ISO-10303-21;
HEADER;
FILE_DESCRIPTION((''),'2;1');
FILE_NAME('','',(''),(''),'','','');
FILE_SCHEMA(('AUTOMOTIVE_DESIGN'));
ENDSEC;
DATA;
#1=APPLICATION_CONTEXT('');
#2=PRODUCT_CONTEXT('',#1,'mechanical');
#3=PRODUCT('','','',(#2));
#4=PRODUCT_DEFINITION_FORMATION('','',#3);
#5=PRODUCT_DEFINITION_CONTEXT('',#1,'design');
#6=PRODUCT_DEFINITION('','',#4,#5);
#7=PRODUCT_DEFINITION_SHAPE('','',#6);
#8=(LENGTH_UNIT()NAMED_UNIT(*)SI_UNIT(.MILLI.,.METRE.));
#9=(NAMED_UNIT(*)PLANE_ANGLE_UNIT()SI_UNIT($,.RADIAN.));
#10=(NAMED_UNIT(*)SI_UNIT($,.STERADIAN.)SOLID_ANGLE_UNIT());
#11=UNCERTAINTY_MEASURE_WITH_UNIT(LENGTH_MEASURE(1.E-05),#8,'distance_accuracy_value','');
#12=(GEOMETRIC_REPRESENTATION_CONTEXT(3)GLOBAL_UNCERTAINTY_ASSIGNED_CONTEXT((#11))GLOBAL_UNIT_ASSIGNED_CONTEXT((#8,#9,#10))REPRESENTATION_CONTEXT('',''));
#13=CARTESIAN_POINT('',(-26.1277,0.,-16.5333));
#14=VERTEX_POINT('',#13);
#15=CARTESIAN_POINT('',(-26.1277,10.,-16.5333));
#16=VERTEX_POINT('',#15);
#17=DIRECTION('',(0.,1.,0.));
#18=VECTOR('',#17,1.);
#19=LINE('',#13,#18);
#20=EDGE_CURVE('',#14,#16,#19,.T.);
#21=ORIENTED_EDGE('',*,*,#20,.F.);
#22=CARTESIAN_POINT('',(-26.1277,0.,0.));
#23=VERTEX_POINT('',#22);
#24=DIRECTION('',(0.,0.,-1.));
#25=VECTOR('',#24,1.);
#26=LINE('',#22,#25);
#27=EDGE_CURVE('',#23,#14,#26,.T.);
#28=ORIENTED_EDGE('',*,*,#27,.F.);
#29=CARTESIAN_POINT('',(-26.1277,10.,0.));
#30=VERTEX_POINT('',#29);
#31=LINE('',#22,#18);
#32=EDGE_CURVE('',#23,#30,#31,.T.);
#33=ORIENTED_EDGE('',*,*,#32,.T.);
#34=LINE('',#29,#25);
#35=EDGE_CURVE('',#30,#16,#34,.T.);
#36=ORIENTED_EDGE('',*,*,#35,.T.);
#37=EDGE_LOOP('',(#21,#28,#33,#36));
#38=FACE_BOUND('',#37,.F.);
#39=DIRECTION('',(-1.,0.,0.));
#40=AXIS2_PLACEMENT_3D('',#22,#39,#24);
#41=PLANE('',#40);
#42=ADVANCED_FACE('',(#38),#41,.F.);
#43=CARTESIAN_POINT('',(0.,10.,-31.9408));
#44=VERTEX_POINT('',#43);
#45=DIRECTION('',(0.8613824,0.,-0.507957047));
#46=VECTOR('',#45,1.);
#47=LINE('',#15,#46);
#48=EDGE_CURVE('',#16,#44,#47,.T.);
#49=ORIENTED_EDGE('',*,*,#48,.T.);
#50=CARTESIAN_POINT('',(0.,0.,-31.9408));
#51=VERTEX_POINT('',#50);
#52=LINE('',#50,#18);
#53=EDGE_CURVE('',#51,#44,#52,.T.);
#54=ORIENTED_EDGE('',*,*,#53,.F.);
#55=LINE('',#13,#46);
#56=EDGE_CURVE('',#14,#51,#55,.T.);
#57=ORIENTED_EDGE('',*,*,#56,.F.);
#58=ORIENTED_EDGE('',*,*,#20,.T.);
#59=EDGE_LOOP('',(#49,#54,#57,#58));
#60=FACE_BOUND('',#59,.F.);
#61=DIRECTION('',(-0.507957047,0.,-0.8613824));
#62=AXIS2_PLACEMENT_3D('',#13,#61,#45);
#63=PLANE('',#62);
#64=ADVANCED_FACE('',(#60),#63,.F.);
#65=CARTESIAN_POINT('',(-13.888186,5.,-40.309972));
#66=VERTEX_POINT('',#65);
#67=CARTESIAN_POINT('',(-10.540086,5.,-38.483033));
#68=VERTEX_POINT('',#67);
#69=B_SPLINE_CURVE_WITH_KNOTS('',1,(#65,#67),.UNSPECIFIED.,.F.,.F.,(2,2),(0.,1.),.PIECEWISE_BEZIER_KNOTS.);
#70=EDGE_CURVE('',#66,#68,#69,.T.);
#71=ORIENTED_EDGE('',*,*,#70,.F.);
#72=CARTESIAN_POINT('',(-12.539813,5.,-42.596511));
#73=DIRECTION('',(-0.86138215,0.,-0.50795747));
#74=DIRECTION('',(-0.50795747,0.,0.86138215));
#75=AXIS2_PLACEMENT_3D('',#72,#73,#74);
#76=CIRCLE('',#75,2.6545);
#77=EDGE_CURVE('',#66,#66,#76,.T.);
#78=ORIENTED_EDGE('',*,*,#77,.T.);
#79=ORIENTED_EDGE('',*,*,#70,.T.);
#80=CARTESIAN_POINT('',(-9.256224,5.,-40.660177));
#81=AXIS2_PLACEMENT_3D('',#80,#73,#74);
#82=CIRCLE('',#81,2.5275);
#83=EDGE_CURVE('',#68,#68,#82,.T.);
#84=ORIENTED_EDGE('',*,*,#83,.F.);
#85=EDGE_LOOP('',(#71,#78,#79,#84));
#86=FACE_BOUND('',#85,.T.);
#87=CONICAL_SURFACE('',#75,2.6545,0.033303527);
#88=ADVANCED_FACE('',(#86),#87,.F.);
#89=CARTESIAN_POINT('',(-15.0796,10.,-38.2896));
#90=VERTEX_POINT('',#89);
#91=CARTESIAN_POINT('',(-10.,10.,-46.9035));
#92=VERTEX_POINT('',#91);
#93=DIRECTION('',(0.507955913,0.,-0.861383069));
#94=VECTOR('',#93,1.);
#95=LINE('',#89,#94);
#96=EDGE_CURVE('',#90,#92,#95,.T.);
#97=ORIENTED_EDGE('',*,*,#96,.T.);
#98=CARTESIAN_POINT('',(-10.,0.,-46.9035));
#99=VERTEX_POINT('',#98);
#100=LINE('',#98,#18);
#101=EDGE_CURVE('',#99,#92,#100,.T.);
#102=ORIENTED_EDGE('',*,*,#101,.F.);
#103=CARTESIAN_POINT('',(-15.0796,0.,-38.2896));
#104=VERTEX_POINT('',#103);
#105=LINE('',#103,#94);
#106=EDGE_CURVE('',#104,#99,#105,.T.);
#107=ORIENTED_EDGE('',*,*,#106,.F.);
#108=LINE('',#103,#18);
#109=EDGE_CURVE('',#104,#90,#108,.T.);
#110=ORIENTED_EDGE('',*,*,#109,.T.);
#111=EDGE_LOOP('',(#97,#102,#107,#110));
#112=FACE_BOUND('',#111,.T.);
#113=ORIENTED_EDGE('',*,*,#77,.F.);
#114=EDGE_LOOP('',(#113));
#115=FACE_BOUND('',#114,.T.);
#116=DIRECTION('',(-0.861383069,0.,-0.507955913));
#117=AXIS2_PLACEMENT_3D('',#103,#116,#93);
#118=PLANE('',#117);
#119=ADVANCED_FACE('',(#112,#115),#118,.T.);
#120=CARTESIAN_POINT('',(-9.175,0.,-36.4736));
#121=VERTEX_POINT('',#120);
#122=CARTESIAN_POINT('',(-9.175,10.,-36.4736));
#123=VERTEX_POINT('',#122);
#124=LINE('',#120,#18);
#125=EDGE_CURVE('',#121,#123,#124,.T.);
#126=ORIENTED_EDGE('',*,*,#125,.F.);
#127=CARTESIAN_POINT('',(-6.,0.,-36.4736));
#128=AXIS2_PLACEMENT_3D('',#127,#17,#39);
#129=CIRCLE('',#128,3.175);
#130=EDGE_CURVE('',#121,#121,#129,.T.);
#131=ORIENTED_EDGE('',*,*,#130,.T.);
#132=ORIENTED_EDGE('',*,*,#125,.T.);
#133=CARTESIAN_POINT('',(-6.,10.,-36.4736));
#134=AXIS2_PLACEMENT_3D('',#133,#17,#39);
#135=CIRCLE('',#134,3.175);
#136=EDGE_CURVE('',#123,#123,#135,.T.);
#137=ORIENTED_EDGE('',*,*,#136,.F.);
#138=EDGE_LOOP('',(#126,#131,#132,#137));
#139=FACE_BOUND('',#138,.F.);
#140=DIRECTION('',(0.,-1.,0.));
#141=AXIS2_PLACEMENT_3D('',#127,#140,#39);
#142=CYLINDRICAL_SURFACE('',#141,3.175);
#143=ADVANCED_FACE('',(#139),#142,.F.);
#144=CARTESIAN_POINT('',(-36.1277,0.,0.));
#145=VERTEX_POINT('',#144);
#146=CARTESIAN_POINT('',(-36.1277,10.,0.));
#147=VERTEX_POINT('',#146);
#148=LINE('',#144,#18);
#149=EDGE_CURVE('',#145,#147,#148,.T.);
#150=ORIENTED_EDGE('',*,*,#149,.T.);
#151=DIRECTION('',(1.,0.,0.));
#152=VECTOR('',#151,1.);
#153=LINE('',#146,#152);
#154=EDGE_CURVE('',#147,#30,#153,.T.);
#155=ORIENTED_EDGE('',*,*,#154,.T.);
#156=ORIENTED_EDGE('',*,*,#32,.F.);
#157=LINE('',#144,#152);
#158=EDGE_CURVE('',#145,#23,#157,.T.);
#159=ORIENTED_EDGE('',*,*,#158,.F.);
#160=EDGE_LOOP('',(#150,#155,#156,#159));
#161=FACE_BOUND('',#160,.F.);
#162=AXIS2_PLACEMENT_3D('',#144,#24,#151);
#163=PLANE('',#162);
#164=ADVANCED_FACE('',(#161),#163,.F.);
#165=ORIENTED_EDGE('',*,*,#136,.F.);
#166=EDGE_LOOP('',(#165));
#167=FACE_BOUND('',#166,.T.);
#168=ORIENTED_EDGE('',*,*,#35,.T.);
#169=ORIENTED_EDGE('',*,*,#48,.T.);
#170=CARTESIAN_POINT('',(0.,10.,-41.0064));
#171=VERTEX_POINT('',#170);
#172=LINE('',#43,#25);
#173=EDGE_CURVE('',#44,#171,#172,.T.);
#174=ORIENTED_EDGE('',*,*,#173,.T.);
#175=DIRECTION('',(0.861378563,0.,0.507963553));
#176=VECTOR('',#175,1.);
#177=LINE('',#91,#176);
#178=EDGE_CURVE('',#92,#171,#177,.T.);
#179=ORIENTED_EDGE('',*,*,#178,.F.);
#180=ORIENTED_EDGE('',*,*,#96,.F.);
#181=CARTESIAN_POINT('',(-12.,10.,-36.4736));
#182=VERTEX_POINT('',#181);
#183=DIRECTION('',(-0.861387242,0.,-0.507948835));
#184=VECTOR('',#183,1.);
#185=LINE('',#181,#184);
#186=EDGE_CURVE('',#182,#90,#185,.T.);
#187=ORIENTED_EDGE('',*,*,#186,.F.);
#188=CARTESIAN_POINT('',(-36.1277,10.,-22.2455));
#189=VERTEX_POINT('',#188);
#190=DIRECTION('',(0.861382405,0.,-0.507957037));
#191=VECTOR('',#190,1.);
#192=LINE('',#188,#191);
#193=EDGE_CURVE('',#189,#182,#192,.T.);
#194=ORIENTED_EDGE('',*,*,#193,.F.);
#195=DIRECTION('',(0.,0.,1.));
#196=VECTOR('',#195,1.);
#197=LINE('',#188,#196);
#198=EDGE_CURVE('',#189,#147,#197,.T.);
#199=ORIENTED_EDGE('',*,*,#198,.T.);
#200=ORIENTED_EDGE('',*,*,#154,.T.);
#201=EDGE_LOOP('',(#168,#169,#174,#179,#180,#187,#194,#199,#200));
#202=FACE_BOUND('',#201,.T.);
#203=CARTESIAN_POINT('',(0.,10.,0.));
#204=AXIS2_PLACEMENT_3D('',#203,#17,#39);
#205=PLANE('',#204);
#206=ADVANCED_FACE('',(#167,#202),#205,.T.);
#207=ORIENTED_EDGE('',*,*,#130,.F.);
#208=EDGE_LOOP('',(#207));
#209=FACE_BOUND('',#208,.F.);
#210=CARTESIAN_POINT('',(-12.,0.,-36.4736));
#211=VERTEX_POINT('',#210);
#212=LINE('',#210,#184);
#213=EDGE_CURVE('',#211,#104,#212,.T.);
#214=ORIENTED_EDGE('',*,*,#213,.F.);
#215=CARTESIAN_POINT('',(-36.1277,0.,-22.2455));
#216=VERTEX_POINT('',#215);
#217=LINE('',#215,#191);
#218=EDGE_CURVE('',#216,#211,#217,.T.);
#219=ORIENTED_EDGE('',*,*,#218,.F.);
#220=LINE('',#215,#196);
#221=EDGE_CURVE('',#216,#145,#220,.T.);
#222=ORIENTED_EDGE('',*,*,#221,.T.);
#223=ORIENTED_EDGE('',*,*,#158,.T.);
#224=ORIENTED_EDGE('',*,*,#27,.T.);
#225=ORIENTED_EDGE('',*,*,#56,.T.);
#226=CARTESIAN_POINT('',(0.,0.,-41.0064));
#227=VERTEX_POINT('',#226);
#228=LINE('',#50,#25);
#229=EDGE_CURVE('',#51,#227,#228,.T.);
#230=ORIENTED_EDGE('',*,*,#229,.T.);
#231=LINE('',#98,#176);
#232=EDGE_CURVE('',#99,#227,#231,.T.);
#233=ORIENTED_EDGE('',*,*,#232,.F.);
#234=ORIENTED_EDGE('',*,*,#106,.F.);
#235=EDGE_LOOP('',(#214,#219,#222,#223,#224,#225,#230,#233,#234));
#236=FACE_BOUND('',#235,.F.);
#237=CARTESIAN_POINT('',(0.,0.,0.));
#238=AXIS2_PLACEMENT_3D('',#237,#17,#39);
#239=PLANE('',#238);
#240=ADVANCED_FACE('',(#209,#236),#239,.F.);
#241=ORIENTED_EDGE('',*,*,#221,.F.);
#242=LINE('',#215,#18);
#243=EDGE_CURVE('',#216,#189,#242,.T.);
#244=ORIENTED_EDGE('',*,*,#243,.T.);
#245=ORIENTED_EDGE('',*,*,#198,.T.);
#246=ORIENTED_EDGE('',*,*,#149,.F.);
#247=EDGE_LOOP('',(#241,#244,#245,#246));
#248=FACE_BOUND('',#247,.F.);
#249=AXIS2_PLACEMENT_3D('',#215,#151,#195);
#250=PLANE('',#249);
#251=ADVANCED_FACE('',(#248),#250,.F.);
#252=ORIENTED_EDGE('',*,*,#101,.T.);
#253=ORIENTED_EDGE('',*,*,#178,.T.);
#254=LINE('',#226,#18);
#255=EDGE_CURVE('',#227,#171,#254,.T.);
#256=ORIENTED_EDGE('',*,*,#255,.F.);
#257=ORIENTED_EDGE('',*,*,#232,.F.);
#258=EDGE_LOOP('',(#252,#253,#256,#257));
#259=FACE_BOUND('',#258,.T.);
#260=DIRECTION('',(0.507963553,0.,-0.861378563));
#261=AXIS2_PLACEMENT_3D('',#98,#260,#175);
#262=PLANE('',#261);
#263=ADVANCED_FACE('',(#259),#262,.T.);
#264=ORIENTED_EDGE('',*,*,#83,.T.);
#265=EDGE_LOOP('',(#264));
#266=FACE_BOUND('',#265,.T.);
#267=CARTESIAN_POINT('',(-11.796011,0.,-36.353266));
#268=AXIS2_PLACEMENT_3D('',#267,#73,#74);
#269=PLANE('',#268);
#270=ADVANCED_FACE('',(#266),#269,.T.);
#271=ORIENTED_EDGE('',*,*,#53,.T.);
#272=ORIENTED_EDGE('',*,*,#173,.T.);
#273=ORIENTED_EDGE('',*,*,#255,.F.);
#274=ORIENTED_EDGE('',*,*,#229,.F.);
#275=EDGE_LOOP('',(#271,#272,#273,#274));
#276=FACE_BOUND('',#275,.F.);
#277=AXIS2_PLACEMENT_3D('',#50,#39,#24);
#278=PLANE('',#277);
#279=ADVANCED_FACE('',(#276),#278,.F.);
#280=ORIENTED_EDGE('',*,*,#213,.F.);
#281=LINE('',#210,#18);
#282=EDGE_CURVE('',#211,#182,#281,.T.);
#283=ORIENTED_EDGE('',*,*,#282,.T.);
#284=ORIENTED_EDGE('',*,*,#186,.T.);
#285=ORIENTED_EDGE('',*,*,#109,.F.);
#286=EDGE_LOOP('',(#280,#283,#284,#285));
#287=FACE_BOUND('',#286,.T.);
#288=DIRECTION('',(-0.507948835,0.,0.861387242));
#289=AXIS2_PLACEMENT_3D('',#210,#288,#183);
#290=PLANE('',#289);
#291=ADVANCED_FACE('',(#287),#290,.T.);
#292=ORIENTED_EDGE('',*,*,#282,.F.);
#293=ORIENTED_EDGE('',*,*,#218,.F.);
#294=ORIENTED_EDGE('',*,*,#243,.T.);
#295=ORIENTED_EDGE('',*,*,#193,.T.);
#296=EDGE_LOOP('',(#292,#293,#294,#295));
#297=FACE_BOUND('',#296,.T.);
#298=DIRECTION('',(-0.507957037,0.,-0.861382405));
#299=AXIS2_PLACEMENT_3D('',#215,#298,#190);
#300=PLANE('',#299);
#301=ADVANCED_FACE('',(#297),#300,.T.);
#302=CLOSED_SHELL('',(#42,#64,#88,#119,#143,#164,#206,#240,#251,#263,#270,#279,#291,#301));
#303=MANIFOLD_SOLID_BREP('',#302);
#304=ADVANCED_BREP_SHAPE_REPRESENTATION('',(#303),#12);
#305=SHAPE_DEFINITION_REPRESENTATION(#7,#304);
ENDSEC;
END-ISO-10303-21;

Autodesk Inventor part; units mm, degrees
ref_plane "YZ Plane" through (0, 0, 0) normal (1, 0, 0) x (0, 1, 0)
ref_plane "XZ Plane" through (0, 0, 0) normal (0, 1, 0) x (-1, 0, 0)
ref_plane "XY Plane" through (0, 0, 0) normal (0, 0, 1) x (1, 0, 0)
sketch "Sketch1" plane through (0, 0, 0) normal (0, 1, 0) x (-1, 0, 0)
  line L0 (36.1277, -22.2455) -> (12, -36.4736)
  line L1 (12, -36.4736) -> (15.0796, -38.2896)
  line L2 (15.0796, -38.2896) -> (10, -46.9035)
  line L3 (10, -46.9035) -> (0, -41.0064)
  line L4 (36.1277, -22.2455) -> (36.1277, 0)
  line L5 (36.1277, 0) -> (26.1277, 0)
  line L6 (26.1277, 0) -> (26.1277, -16.5333)
  line L7 (26.1277, -16.5333) -> (0, -31.9408)
  line L8 (0, -31.9408) -> (0, -41.0064)
  line L9 (0, -36.4736) -> (12, -36.4736) construction
  circle A0 centre (6, -36.4736) radius 3.175
  point P0 (0, 0)
  dimension "d1" = 10
  dimension "d8" = 10
  dimension "d9" = 10
  dimension "d10" = 10
  dimension "d12" = 12
  dimension "d13" = 6.35
  dimension "d14" = 22.2455
  dimension "d17" = 61.056
  dimension "d19" = 28.0104
extrude "Extrusion1" add sketch "Sketch1" along normal blind 10
sketch "Sketch2" plane through (-15.0796, 0, -38.2896) normal (-0.8613822, 0, -0.5079575) x (-0.5079575, 0, 0.8613822)
  line L0 (0, 0) -> (-10, 0) projected
  line L1 (0, 0) -> (0, 10) projected
  line L2 (-10, 10) -> (0, 10) projected
  line L3 (-10, 0) -> (-10, 10) projected
  line L4 (-5, 10) -> (-5, 0) construction
  line L5 (-10, 5) -> (-5, 5) construction
  circle A0 centre (-5, 5) radius 2.5275
  circle A1 centre (-5, 5) radius 2.6545
  point P0 (25.3222, 0)
  dimension "d22" = 5.055
  dimension "d23" = 5.309
extrude "Extrusion2" cut sketch "Sketch2" against normal blind 3.81 contours A0
sketch "Sketch3" plane through (-9.2579, 5, -40.6612) normal (-0.8613822, 0, -0.5079575) x (-0.5079575, 0, 0.8613822)
  line L0 (-5, 0) -> (0, 0) construction
  circle A0 centre (0, 0) radius 2.5275 projected
  circle A1 centre (0, 0) radius 2.5275
  point P0 (30.3222, -5)
loft "Loft1" cut profiles "Sketch2" section 2 edges at (-7.9723, 5, -42.8373) contours A0 | A1
properties part number "seeSaw"
